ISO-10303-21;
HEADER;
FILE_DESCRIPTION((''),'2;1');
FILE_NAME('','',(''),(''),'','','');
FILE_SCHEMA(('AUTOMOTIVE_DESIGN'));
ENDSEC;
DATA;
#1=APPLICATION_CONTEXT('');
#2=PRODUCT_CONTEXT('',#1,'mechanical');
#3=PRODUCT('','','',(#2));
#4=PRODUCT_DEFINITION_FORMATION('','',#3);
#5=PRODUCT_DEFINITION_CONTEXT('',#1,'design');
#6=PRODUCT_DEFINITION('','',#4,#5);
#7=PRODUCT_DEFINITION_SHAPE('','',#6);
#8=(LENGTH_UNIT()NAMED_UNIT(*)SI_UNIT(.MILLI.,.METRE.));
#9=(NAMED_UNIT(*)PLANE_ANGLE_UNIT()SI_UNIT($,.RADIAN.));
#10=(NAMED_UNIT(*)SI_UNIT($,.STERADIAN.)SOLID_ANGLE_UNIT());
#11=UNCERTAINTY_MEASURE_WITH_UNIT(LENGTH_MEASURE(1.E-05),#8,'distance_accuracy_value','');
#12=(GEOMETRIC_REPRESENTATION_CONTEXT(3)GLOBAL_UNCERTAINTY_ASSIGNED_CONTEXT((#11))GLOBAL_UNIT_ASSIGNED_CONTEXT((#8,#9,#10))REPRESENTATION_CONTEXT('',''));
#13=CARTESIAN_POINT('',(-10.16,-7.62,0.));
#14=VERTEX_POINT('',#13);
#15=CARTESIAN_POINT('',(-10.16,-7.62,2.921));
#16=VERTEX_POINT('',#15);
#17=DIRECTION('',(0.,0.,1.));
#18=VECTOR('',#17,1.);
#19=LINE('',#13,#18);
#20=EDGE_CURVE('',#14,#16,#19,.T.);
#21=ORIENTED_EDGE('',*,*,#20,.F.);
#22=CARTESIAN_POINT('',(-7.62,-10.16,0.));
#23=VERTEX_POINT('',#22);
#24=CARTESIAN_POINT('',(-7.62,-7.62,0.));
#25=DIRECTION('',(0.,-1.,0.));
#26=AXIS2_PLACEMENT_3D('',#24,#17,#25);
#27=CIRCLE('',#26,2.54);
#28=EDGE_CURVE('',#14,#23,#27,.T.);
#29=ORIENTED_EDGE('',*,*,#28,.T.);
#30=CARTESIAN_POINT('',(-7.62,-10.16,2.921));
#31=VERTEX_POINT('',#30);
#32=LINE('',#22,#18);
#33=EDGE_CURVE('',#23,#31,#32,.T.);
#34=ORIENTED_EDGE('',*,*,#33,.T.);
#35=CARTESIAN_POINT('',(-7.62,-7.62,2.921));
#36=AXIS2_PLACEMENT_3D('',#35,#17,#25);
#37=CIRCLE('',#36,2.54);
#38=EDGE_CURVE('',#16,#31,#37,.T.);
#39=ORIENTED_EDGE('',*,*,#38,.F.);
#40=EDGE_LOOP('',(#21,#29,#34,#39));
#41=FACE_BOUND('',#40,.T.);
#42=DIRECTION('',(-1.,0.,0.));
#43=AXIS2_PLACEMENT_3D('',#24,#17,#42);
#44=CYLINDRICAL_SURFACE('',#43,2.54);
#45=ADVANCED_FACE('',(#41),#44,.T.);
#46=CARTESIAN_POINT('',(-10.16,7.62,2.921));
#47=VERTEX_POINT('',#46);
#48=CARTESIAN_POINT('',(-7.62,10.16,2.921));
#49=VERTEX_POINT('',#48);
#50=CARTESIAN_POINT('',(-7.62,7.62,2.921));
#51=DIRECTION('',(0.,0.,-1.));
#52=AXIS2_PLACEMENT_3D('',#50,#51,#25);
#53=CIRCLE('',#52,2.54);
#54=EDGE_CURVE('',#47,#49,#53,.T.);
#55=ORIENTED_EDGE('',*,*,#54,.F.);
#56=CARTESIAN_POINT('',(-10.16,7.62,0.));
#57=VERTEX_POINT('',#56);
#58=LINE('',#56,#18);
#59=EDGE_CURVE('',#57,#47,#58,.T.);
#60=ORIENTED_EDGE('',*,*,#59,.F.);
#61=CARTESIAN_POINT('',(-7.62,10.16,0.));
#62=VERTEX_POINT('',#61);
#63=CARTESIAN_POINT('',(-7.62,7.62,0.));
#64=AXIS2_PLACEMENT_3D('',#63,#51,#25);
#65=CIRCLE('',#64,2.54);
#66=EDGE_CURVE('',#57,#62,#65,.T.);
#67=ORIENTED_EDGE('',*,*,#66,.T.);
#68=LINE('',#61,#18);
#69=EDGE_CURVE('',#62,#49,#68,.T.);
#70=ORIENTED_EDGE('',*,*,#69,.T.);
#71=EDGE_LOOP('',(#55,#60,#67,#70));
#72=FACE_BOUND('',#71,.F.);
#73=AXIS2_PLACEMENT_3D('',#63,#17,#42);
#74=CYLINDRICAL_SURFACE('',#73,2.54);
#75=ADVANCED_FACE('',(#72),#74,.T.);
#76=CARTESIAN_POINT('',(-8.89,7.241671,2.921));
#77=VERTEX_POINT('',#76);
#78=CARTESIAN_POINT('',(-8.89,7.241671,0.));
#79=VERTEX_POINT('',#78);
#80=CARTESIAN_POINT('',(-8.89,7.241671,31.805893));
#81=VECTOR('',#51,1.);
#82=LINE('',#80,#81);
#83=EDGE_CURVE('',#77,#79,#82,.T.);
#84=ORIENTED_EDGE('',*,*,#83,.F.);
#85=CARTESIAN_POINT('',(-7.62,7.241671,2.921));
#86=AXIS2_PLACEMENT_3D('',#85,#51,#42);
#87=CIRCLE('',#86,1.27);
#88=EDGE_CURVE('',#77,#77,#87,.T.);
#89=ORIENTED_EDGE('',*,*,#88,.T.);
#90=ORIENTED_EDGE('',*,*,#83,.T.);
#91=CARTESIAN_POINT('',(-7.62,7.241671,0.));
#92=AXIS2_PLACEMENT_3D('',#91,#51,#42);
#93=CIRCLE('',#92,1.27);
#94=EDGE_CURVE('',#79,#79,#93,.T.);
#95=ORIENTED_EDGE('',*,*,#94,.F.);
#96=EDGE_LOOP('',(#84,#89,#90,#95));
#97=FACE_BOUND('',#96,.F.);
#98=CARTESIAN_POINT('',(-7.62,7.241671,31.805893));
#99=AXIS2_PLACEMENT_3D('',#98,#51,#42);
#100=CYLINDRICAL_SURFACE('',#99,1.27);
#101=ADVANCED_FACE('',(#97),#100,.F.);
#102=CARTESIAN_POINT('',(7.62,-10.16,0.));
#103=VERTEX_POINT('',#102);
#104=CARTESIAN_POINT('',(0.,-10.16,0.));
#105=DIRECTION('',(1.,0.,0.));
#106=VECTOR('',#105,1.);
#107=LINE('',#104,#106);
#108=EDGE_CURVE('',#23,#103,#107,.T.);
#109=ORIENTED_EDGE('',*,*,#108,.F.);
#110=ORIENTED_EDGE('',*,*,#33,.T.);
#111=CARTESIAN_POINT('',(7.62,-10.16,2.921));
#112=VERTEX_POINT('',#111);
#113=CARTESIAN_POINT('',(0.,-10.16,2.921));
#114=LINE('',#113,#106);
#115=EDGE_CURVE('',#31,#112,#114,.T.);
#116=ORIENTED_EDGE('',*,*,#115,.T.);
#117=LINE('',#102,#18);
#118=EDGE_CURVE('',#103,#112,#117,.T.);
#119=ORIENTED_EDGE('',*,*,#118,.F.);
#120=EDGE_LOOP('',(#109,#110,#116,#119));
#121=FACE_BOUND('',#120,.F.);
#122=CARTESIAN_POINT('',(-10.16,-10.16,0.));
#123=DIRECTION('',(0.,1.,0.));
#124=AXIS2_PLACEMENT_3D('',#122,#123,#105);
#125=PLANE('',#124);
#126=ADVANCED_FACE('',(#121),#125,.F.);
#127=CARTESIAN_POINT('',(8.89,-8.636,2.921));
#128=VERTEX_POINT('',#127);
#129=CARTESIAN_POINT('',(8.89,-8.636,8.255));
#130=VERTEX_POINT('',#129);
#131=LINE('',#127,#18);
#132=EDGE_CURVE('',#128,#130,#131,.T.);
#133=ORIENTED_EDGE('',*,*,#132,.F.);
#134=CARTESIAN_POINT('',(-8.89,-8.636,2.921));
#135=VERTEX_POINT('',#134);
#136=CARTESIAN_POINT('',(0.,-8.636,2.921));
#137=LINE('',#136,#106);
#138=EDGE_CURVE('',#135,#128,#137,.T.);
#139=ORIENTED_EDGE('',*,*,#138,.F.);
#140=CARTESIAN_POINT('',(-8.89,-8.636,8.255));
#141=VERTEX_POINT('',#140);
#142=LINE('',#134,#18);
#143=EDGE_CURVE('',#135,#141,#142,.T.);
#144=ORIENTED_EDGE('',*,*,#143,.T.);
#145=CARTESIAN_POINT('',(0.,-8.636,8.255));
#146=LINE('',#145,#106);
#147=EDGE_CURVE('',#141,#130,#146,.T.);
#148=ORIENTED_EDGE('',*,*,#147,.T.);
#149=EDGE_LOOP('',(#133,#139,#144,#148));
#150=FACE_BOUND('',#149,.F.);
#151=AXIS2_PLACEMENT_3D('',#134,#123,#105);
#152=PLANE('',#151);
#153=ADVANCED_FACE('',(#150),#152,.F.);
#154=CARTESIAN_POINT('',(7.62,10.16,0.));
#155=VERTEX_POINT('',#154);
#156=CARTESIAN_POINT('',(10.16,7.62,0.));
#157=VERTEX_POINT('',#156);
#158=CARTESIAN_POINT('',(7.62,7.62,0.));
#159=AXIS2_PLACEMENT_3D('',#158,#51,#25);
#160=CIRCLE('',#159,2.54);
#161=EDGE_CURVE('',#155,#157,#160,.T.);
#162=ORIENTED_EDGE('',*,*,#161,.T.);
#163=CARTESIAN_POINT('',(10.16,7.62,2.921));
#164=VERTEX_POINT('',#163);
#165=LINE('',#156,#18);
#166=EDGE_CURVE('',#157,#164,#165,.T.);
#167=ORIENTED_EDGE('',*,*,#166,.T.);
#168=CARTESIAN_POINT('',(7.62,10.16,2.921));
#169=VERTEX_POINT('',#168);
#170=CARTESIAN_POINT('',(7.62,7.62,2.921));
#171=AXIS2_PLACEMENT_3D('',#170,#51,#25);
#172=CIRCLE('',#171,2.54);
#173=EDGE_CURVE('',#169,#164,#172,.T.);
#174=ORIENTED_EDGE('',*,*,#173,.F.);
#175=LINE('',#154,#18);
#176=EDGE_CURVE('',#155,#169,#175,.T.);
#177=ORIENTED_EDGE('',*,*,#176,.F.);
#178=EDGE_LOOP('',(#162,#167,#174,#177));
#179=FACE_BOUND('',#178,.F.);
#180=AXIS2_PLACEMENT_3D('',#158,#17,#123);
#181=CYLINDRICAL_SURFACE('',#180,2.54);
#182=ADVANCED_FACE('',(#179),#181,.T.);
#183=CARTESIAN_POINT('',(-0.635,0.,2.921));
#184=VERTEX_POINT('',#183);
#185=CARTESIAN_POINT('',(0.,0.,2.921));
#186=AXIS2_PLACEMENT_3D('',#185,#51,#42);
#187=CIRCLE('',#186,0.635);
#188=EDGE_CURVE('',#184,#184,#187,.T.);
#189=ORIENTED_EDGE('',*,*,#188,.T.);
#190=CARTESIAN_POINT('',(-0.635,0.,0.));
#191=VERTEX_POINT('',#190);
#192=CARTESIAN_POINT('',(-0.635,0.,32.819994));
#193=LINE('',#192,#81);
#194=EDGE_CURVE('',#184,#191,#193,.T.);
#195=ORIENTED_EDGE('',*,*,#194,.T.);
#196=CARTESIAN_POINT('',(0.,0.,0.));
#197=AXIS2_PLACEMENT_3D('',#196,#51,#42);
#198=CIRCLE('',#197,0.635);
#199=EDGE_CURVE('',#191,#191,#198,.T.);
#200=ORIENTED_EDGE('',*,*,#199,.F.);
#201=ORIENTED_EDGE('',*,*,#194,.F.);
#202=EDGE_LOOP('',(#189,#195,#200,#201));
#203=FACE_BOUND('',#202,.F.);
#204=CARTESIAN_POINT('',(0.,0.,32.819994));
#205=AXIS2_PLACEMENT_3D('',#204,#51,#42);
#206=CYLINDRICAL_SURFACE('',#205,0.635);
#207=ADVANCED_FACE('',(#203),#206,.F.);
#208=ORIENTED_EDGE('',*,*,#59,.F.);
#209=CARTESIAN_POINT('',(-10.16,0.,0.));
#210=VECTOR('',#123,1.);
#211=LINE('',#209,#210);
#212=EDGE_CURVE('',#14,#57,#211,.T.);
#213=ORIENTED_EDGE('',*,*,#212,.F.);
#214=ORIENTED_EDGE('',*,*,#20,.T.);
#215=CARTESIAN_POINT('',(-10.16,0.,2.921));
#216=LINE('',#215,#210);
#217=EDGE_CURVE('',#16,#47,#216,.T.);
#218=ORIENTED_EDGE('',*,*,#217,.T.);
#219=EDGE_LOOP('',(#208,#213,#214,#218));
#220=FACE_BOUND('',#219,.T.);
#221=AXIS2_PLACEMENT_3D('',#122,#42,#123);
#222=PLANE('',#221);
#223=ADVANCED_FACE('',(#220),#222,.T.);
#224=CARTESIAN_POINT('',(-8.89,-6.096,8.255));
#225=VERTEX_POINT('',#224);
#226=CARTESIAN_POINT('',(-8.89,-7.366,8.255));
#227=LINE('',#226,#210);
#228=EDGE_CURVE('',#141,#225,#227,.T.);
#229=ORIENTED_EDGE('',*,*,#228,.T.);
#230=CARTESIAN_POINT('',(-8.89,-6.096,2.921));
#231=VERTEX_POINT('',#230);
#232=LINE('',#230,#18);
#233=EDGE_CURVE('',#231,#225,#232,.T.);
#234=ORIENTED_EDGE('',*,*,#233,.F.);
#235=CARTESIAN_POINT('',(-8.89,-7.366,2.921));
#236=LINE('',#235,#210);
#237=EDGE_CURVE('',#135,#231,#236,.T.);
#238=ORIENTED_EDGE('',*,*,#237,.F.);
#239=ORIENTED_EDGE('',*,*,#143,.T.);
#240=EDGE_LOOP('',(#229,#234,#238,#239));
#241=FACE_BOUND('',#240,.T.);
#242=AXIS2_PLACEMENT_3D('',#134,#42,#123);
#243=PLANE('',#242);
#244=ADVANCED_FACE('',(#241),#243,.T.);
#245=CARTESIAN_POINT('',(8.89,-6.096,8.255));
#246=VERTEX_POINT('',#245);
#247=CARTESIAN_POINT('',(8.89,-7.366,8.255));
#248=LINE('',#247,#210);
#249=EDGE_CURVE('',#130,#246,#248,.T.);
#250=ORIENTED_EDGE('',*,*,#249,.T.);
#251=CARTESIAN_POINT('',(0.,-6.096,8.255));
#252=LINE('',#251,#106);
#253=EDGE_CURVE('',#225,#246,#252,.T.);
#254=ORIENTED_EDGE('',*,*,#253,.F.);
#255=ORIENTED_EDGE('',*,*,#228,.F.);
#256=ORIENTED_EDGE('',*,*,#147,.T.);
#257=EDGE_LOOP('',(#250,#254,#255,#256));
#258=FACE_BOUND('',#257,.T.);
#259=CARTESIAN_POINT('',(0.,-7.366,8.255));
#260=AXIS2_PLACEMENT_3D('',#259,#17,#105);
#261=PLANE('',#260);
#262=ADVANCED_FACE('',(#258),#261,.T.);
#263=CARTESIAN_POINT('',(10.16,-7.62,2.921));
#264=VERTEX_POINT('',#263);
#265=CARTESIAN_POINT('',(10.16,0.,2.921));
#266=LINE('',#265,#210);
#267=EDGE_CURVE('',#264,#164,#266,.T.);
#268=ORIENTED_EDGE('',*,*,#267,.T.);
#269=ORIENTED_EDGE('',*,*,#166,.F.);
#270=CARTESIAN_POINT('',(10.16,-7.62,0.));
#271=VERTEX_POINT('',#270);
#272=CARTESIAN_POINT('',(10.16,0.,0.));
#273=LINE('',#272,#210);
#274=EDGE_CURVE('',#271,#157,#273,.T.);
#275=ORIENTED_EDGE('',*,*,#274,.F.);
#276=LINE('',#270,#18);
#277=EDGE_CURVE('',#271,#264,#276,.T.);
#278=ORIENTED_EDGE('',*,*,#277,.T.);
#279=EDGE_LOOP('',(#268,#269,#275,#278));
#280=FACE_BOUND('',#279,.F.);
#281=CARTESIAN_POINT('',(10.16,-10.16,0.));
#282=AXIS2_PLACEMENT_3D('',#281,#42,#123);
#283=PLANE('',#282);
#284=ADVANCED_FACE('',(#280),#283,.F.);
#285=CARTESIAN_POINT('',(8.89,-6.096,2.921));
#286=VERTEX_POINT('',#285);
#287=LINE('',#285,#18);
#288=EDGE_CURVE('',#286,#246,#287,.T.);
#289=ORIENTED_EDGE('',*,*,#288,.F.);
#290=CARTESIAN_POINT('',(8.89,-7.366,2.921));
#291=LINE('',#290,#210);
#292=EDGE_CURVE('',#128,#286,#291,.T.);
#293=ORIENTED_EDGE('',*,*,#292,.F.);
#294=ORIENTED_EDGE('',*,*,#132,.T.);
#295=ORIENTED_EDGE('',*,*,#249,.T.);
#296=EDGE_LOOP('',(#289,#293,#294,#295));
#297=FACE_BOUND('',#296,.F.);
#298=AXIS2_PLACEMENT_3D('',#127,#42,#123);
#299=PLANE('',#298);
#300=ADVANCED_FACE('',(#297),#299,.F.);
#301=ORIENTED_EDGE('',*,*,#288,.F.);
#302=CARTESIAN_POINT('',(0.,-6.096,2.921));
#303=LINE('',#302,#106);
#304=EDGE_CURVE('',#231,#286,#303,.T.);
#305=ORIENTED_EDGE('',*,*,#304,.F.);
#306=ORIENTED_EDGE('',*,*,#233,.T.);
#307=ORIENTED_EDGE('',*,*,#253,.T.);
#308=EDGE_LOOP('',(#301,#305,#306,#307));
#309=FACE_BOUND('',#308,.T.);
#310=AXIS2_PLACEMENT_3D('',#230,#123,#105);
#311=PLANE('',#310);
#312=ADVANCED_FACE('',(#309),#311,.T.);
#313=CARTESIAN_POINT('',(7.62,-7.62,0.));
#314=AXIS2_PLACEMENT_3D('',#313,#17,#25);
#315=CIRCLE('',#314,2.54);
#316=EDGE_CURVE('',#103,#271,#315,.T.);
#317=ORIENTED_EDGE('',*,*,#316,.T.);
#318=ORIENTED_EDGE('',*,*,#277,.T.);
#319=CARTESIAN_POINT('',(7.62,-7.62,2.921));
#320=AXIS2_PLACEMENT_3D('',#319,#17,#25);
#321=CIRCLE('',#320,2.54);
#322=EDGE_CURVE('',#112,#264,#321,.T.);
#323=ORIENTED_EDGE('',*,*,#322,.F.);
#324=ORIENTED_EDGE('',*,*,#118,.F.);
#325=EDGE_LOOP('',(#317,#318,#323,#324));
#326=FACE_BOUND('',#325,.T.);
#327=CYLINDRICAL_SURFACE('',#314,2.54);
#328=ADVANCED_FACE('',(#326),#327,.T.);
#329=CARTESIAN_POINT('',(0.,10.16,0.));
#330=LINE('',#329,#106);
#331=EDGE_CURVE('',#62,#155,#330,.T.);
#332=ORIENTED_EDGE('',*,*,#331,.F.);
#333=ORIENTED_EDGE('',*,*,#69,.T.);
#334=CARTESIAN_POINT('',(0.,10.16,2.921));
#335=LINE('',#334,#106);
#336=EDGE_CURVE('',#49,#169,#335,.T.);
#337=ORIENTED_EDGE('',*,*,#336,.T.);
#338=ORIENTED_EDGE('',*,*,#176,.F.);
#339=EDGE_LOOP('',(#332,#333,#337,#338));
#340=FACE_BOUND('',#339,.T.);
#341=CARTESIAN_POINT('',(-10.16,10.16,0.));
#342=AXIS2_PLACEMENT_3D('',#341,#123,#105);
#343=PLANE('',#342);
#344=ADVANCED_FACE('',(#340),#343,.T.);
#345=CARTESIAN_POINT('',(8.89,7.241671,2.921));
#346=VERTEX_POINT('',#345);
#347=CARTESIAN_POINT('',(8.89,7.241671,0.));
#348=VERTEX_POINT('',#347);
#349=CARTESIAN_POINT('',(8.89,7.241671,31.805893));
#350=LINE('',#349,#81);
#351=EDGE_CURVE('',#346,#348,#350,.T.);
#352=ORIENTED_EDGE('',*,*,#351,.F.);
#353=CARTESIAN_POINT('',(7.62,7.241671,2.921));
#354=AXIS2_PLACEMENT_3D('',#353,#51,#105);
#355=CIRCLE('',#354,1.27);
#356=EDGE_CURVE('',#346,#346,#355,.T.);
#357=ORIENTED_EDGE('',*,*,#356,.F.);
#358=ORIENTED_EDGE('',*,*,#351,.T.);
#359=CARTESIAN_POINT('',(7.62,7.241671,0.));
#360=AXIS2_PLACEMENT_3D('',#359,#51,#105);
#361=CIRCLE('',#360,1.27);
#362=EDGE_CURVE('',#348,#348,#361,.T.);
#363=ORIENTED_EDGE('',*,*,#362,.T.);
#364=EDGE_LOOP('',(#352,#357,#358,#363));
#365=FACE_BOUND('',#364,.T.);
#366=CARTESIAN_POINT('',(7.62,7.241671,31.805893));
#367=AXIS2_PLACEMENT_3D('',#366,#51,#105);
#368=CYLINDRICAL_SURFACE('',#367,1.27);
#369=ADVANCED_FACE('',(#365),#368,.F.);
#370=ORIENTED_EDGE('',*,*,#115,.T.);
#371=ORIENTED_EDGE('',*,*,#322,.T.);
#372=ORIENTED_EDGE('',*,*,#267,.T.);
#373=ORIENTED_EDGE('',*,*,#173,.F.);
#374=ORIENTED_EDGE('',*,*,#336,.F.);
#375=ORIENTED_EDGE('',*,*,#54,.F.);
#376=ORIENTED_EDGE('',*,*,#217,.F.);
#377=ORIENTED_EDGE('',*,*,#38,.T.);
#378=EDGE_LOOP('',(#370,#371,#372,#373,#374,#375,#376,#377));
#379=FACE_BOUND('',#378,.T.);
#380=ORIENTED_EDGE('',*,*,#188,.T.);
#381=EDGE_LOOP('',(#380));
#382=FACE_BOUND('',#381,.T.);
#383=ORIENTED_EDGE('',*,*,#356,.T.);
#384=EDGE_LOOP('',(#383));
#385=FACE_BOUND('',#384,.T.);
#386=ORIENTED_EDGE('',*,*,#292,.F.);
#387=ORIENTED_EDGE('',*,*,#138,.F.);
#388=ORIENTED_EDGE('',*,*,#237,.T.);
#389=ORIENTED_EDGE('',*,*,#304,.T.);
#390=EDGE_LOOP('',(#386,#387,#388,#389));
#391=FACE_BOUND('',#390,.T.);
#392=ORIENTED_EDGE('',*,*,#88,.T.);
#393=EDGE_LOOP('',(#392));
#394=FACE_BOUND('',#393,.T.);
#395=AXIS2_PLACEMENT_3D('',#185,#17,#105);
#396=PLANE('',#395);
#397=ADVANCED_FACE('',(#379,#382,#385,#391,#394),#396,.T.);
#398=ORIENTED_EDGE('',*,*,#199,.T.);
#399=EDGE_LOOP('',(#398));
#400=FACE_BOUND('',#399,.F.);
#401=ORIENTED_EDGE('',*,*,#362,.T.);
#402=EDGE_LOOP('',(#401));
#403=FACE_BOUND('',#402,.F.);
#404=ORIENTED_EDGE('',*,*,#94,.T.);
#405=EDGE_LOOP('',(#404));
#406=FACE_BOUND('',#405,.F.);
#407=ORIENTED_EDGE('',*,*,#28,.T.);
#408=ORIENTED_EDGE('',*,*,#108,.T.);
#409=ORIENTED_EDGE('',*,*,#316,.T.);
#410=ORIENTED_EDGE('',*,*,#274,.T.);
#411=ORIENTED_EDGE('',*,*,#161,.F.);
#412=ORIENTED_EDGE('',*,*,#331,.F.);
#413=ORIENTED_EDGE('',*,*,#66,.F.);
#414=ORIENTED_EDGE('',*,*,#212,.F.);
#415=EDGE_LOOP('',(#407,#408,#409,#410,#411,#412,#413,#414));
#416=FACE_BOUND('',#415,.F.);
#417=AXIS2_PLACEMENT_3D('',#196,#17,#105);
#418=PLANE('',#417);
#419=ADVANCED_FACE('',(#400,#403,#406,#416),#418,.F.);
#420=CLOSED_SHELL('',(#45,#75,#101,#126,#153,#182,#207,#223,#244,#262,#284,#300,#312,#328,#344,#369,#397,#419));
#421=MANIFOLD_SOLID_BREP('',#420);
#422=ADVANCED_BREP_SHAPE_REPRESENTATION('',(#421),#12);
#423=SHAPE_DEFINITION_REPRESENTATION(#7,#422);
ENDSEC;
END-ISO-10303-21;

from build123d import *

# Parameters (mm, degrees)
F0_W     = 20.32
F0_H     = 20.32
F1_DEPTH = 2.921
F3_D     = 2.54
F5_R     = 2.54
F4_W     = 17.78
F4_H     = 2.54
F6_DEPTH = 5.334
F8_D     = 1.27


# Not quite as in the source:
# - a pattern or mirror of a feature is missing from the dataset's text; its kind, count and spacing are read off the source's solid


with BuildPart() as f1:
    # F0 (on Top) → F1 (new body)
    with BuildSketch(Plane.XY):
        Rectangle(F0_W, F0_H)
    extrude(amount=F1_DEPTH)

    # F3 (through all)
    with Locations(Plane.XY.offset(2.921)):
        with Locations((-7.62, 7.2416714393)):
            f3 = Hole(F3_D / 2)

    # F3_copies: F3 across plane
    add(f3.mirror(Plane(origin=(0, 0, 0), x_dir=(0, 0, 1), z_dir=(1, 0, 0))), mode=Mode.SUBTRACT)

    # F5
    f5_edges = [f1.edges().sort_by_distance(p)[0] for p in [
        (-10.16, 10.16, 1.4605),
        (10.16, 10.16, 1.4605),
        (-10.16, -10.16, 1.4605),
        (10.16, -10.16, 1.4605),
    ]]
    fillet(f5_edges, radius=F5_R)

    # F4 (on face) → F6 (join)
    with BuildSketch(Plane.XY.offset(2.921)):
        with Locations((0, -7.366)):
            Rectangle(F4_W, F4_H)
    extrude(amount=F6_DEPTH)

    # F8 (through all)
    with Locations(Plane.XY.offset(2.921)):
        with Locations((0, 0)):
            Hole(F8_D / 2)


solid = f1.part
